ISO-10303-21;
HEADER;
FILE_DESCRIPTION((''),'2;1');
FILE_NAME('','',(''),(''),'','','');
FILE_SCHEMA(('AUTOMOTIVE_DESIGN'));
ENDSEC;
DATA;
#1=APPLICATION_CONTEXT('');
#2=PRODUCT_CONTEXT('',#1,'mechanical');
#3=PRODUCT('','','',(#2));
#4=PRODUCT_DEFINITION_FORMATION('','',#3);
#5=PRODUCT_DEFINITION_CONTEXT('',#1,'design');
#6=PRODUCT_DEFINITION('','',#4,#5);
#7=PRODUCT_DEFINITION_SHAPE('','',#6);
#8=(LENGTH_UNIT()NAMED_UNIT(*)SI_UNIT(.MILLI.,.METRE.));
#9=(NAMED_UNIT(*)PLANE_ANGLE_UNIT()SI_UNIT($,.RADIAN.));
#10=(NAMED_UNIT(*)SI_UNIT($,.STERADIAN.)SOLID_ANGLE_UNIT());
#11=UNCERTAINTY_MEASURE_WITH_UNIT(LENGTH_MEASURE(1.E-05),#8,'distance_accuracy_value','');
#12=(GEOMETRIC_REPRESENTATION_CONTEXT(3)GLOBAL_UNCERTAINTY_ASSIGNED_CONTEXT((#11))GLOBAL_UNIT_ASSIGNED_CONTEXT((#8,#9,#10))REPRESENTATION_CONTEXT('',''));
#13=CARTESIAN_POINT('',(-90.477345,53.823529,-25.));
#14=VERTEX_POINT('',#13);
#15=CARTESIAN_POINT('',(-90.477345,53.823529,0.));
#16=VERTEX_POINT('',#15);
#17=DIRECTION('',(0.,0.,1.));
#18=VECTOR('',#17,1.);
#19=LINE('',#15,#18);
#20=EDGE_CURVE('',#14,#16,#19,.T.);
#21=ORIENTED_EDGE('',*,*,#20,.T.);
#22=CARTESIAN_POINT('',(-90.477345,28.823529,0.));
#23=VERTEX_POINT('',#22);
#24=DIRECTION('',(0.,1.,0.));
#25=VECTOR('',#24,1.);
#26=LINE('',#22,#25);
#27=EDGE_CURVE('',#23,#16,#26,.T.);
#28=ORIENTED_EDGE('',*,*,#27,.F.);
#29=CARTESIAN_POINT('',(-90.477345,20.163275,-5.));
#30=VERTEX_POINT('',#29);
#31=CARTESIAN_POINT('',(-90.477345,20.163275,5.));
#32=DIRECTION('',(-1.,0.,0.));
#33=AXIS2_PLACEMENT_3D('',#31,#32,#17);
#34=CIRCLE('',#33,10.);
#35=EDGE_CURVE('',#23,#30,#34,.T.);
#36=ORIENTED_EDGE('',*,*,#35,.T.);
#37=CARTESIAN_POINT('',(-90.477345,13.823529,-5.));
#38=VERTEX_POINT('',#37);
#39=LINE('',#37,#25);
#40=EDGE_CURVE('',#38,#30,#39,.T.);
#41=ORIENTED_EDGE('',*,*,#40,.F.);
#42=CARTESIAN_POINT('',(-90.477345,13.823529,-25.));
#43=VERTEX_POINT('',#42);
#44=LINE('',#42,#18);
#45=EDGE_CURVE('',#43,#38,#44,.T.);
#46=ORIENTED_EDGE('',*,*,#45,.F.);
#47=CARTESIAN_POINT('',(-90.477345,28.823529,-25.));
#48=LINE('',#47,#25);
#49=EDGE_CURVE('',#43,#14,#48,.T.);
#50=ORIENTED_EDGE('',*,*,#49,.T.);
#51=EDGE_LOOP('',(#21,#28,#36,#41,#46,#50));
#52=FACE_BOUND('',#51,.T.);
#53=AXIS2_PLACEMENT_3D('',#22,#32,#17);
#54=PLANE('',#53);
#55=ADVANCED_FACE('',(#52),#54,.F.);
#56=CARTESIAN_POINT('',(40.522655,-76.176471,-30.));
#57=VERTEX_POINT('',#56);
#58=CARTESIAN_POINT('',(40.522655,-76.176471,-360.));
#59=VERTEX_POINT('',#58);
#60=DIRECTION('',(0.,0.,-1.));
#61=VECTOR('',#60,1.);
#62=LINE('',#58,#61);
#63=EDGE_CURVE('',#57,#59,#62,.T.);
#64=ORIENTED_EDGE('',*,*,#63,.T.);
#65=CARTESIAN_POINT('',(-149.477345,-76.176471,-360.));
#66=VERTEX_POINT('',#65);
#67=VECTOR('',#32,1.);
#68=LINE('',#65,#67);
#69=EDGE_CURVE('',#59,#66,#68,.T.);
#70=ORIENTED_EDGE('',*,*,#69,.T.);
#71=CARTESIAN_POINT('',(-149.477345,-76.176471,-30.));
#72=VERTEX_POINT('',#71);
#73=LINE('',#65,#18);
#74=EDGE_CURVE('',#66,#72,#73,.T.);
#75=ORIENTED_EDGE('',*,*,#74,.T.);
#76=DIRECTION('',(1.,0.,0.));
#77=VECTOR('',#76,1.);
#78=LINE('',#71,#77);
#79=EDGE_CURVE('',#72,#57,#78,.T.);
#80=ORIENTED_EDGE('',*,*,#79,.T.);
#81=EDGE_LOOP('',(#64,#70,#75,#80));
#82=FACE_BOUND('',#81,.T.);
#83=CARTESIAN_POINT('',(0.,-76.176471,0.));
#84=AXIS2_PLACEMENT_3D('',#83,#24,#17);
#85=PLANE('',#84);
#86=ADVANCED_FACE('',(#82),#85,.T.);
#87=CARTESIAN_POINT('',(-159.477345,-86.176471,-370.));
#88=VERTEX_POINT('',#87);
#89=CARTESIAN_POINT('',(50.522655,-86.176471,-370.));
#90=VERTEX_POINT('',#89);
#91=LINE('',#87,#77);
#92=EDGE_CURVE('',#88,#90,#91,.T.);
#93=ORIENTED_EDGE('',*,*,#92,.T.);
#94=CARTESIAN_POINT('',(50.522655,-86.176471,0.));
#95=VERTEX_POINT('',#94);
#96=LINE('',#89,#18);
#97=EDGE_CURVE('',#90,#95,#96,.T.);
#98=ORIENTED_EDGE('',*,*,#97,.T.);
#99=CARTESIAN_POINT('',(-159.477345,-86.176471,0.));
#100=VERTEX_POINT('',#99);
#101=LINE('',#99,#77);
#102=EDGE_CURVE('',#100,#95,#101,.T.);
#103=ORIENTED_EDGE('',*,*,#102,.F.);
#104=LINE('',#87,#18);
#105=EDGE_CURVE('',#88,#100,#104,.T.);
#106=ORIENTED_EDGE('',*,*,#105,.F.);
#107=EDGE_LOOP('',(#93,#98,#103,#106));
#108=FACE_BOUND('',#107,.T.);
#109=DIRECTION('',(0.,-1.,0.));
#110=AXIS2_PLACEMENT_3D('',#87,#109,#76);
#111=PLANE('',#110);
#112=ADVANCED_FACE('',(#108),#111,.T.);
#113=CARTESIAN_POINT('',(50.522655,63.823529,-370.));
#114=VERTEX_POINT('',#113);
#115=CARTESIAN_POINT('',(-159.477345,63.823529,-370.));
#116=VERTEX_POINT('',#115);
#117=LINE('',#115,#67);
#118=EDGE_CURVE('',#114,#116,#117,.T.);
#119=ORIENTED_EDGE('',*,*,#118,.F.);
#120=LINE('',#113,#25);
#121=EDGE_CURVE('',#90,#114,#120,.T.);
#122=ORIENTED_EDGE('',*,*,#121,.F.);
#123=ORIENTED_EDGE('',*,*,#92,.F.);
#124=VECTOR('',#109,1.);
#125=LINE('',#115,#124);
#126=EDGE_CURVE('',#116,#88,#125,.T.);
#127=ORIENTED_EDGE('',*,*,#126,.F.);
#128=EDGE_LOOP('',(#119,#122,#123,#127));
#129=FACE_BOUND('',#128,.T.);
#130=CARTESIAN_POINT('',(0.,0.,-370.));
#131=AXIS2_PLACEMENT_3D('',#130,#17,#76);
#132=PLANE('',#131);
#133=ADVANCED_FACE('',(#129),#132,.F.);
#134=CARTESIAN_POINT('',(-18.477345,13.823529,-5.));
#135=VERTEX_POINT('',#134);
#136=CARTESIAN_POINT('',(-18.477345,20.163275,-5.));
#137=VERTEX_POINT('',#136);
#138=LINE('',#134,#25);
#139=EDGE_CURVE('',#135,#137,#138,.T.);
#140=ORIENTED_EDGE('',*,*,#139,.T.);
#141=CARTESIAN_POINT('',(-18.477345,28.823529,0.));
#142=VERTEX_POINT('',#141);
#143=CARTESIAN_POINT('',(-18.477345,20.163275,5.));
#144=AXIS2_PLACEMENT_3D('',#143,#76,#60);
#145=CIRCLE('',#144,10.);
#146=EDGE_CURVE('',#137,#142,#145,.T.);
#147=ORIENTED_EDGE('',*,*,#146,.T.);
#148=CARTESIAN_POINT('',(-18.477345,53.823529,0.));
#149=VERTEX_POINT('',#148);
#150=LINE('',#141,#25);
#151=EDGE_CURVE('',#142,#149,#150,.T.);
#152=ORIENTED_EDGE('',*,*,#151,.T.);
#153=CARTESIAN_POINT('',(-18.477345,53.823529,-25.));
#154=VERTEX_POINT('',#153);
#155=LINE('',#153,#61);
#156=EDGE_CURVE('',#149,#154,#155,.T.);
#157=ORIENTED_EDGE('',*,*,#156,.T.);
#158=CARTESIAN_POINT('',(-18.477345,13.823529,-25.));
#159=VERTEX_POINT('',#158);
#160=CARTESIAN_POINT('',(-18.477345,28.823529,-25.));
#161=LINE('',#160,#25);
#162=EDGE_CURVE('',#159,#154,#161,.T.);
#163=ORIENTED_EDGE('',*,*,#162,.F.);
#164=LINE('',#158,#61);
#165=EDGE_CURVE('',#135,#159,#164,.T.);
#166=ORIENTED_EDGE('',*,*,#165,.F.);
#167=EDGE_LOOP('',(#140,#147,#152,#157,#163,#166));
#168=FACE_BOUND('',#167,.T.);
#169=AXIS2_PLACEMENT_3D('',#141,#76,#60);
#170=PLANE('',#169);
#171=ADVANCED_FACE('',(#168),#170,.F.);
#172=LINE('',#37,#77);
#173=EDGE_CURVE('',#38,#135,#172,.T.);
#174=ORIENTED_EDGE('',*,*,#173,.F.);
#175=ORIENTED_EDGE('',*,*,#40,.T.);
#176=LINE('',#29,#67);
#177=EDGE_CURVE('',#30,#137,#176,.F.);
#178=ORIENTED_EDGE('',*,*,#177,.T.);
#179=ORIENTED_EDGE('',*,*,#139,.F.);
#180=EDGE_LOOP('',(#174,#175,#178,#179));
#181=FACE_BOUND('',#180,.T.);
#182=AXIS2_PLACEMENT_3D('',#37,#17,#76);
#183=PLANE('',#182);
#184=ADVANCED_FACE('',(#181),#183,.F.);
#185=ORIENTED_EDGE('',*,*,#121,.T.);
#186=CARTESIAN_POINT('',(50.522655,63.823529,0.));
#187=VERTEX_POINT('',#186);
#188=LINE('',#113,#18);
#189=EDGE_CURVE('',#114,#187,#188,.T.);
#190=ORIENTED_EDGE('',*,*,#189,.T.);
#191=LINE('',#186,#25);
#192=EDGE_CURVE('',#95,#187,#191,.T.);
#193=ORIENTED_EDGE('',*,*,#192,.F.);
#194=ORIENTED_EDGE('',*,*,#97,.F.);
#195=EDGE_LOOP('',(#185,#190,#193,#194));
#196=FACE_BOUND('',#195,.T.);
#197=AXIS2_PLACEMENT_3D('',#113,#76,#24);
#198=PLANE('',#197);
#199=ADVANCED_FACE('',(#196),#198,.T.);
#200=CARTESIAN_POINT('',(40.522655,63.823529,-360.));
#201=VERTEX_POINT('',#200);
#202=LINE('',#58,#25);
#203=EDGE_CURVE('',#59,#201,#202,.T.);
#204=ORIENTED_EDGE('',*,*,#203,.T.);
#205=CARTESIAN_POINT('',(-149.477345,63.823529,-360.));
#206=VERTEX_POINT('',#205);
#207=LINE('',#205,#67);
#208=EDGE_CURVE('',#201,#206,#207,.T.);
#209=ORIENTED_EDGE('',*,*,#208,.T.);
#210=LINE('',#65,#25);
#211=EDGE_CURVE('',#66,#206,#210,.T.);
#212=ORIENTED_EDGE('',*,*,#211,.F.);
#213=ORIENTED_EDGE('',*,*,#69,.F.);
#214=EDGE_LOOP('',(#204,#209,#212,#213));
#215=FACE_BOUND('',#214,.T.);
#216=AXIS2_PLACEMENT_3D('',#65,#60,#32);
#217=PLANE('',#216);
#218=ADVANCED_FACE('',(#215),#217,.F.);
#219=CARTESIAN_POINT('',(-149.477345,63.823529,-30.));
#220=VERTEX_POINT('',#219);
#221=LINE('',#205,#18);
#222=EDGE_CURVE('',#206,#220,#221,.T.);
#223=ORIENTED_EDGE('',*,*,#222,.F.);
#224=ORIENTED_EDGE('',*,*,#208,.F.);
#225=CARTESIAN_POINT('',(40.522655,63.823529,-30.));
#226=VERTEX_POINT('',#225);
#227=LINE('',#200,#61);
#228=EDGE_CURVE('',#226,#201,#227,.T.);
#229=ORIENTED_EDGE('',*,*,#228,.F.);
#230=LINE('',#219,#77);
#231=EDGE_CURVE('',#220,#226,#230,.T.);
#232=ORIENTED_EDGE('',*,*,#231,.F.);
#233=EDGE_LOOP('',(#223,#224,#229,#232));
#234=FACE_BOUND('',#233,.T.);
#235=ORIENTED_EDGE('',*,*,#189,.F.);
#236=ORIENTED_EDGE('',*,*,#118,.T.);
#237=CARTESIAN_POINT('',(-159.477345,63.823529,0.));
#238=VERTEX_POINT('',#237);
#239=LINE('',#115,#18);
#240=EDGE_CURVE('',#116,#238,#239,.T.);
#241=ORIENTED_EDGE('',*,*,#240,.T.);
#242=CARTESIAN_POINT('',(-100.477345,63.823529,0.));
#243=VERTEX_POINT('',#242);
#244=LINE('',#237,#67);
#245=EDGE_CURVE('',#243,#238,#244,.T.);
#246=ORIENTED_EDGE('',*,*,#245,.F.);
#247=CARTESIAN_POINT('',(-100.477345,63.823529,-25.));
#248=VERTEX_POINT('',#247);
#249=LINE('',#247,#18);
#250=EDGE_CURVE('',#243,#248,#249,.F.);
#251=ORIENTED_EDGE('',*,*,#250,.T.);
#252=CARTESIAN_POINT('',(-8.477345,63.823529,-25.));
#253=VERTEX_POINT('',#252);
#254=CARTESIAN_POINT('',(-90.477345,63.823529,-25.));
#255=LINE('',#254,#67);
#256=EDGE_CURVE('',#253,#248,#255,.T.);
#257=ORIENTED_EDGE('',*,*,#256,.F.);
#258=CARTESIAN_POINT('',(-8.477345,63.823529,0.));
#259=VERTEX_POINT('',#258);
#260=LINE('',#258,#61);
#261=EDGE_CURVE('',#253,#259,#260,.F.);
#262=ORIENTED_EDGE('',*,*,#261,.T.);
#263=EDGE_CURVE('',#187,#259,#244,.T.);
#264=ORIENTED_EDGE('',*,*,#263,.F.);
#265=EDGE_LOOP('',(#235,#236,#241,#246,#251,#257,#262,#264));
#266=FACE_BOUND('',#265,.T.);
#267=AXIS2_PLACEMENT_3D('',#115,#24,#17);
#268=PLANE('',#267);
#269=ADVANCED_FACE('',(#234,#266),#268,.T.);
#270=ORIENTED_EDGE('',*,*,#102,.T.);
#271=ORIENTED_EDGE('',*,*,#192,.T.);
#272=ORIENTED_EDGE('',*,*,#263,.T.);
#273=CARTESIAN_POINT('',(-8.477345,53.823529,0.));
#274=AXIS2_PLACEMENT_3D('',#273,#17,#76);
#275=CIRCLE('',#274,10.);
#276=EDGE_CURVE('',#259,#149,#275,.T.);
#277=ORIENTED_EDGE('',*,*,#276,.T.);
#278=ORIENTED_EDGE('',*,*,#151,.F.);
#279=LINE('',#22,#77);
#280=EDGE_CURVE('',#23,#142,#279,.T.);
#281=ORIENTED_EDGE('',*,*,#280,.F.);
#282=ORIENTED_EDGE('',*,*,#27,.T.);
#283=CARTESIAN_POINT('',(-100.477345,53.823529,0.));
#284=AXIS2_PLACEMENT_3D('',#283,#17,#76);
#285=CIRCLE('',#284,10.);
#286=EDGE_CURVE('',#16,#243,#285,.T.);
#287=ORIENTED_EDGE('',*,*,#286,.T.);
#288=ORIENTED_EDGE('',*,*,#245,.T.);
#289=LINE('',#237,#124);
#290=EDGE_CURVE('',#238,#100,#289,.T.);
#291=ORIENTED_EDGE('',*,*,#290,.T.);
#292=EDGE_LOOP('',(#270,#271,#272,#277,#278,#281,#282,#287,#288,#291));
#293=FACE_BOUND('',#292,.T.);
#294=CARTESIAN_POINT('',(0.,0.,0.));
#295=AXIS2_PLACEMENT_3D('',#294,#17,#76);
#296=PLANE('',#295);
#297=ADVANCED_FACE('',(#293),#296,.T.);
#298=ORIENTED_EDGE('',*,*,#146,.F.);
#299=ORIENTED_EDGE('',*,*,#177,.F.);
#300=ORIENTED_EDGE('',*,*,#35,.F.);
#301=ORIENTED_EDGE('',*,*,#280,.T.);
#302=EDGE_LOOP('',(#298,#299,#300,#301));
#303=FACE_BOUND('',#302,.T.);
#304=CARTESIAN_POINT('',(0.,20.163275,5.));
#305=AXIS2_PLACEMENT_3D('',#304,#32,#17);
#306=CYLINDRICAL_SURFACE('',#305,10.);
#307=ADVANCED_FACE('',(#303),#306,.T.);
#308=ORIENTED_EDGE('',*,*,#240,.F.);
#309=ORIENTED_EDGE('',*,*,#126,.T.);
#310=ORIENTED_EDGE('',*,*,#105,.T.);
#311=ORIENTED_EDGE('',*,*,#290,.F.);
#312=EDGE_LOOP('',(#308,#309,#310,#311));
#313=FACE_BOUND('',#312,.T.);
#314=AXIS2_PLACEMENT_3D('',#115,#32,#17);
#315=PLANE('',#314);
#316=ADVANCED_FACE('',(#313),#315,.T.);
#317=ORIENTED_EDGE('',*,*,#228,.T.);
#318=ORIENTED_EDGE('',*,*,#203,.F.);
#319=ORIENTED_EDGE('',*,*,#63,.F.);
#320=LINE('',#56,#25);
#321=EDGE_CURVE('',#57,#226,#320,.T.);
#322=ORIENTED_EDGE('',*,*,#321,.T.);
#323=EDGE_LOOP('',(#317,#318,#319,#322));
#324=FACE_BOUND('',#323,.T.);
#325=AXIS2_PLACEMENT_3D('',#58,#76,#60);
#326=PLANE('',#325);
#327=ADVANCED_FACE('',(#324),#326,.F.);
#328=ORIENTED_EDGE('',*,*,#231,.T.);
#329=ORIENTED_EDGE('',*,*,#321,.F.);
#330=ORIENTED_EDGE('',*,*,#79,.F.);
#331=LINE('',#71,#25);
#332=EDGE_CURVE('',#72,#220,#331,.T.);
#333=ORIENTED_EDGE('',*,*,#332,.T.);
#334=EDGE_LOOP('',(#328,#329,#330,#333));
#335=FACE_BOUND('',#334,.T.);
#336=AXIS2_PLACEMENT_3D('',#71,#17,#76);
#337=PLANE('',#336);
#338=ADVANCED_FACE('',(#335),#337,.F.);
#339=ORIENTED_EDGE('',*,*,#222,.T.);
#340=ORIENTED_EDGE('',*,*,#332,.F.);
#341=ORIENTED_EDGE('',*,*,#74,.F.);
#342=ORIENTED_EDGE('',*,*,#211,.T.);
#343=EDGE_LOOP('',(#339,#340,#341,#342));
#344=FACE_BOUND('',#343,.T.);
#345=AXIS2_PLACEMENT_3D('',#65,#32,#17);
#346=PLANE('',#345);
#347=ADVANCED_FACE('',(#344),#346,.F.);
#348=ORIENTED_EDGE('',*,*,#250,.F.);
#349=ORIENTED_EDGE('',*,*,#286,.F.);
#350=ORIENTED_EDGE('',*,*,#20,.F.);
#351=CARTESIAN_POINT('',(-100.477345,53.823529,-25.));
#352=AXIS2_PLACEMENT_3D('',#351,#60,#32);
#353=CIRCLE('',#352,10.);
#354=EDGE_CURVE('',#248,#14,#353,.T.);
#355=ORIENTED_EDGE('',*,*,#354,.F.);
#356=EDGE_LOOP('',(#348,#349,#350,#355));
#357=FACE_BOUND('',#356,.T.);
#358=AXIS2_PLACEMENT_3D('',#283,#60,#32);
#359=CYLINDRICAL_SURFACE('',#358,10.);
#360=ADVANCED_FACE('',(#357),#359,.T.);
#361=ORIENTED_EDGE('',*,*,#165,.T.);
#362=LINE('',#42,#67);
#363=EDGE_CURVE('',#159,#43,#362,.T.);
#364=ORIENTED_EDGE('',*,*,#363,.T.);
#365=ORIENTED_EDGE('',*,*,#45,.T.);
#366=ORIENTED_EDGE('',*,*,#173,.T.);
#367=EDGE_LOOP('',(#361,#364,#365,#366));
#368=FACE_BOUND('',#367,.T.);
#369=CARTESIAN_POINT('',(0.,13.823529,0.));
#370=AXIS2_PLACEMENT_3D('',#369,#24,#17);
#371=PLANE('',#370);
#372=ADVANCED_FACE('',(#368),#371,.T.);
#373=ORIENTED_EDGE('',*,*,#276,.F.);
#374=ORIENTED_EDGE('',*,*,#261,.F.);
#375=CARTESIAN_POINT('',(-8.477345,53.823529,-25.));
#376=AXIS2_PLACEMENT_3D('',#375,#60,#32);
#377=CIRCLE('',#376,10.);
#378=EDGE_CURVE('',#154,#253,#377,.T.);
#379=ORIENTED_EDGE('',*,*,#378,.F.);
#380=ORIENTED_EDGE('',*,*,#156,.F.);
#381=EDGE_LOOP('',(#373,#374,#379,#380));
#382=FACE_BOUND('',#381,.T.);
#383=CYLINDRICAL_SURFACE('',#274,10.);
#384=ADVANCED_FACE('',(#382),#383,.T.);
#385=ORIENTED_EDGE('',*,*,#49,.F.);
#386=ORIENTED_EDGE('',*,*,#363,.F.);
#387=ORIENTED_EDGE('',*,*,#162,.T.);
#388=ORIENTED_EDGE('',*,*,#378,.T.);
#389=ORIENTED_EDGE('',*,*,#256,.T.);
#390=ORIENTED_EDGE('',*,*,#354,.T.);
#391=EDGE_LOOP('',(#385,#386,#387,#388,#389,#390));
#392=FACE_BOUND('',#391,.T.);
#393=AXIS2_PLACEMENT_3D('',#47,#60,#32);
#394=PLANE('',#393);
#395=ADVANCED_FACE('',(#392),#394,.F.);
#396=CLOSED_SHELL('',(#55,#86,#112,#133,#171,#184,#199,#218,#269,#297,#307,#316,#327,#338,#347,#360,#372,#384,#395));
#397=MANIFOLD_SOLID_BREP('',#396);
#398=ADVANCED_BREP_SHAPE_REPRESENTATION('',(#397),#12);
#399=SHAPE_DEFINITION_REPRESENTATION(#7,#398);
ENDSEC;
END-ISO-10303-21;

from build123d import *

# Parameters (mm, degrees)
ESQUISSE1_W             = 210
ESQUISSE1_H             = 150
BOSS_EXTRU_1_DEPTH      = 370
ESQUISSE2_W             = 190
ESQUISSE2_H             = 330
ENL_V_MAT_EXTRU_1_DEPTH = 140
ESQUISSE6_W             = 72
ESQUISSE6_H             = 25
ENL_V_MAT_EXTRU_4_DEPTH = 35
ESQUISSE7_W             = 72
ESQUISSE7_H             = 20
ENL_V_MAT_EXTRU_5_DEPTH = 15
CONG_3_R                = 10
CONG_4_R                = 10
CONG_5_R                = 10


with BuildPart() as part:
    # Esquisse1 → Boss.-Extru.1 (new body)
    with BuildSketch(Plane.XY):
        with Locations((-54.477344992, -11.176470588)):
            Rectangle(ESQUISSE1_W, ESQUISSE1_H)
    extrude(amount=-BOSS_EXTRU_1_DEPTH)

    # Esquisse2 → Enlèv. mat.-Extru.1 (cut)
    with BuildSketch(Plane(origin=(0, 63.823529412, 0), x_dir=(1, 0, 0), z_dir=(0, 1, 0))):
        with Locations((-54.477344992, 195)):
            Rectangle(ESQUISSE2_W, ESQUISSE2_H)
    extrude(amount=-ENL_V_MAT_EXTRU_1_DEPTH, mode=Mode.SUBTRACT)

    # Esquisse6 → Enlèv. mat.-Extru.4 (cut)
    with BuildSketch(Plane(origin=(0, 63.823529412, 0), x_dir=(1, 0, 0), z_dir=(0, 1, 0))):
        with Locations((-54.477344992, 12.5)):
            Rectangle(ESQUISSE6_W, ESQUISSE6_H)
    extrude(amount=-ENL_V_MAT_EXTRU_4_DEPTH, mode=Mode.SUBTRACT)

    # Esquisse7 → Enlèv. mat.-Extru.5 (cut)
    with BuildSketch(Plane(origin=(0, 28.823529412, 0), x_dir=(1, 0, 0), z_dir=(0, 1, 0))):
        with Locations((-54.477344992, 15)):
            Rectangle(ESQUISSE7_W, ESQUISSE7_H)
    extrude(amount=-ENL_V_MAT_EXTRU_5_DEPTH, mode=Mode.SUBTRACT)

    # Congé3
    cong_3_edges = [part.edges().sort_by_distance(p)[0] for p in [
        (-90.477344992, 63.823529412, -12.5),
    ]]
    fillet(cong_3_edges, radius=CONG_3_R)

    # Congé4
    cong_4_edges = [part.edges().sort_by_distance(p)[0] for p in [
        (-18.477344992, 63.823529412, -12.5),
    ]]
    fillet(cong_4_edges, radius=CONG_4_R)

    # Congé5
    # the kernel refuses this fillet: 10 mm, written as the material it takes off along each edge
    with BuildSketch(Plane(origin=(-18.477344992, 28.823529412, -5), x_dir=(0, 0, 1), z_dir=(-1, 0, 0))) as cong_5_piece_1:
        with BuildLine():
            CenterArc((10, -8.660254038), CONG_5_R, 120, 60)
            Line((0, -8.660254038), (-0.2, -8.660254038))
            Line((-0.2, -8.660254038), (-0.2, 0))
            Line((-0.2, 0), (0, 0.2))
            ThreePointArc((0, 0.2), (2.5, 0.2), (4.9, 0.173205081))
            Line((4.9, 0.173205081), (5, 0))
        make_face()
    extrude(amount=72, mode=Mode.SUBTRACT)


solid = part.part
